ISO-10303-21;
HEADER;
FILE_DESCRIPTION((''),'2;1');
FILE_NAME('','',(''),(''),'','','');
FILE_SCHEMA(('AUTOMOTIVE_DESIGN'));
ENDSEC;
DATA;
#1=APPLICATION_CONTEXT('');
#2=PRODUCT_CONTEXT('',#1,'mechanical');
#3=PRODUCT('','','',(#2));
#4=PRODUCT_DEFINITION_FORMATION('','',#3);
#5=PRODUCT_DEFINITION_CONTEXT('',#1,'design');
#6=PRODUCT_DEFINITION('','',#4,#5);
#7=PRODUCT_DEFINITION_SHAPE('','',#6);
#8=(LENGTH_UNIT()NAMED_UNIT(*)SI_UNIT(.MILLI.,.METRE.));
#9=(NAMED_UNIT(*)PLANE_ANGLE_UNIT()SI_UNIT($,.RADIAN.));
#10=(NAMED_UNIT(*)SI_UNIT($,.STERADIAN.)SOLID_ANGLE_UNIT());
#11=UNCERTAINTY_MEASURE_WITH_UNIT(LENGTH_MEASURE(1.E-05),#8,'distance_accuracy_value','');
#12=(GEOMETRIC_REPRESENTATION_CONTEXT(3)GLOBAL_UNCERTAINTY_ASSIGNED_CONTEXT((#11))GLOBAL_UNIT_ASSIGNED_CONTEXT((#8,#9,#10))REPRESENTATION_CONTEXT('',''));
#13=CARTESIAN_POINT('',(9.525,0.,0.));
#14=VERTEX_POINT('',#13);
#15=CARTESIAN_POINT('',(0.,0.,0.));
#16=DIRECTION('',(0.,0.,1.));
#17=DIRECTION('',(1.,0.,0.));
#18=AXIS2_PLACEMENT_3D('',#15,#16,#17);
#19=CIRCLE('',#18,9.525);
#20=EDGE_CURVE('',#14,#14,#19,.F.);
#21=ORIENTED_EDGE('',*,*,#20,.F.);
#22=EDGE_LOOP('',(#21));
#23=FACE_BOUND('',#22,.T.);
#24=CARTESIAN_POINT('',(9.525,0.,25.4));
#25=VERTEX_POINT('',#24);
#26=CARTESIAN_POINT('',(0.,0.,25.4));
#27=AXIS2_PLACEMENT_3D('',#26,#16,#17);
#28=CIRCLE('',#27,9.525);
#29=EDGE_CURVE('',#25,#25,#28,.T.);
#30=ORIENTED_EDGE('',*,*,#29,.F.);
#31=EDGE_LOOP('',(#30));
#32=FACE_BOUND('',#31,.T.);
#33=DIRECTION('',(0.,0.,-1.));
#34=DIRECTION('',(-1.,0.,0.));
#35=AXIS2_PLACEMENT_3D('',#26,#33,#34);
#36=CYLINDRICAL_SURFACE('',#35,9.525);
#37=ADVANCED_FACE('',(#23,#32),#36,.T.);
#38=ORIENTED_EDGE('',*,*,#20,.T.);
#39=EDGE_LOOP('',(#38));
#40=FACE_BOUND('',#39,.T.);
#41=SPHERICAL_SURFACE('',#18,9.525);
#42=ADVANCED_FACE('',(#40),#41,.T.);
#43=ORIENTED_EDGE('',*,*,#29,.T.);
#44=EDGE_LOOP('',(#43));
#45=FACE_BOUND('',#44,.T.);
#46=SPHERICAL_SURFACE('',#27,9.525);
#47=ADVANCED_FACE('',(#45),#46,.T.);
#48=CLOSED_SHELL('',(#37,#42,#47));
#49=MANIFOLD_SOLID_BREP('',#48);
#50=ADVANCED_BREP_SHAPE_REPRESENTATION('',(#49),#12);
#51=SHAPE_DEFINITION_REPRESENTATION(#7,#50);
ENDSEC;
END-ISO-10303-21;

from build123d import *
from build123d.topology import SkipClean

# Parameters (mm, degrees)
SKETCH1_R           = 9.525
BOSS_EXTRUDE1_DEPTH = 25.4


with BuildPart() as part:
    # Sketch1 → Boss-Extrude1 (new body)
    with BuildSketch(Plane.XY):
        Circle(SKETCH1_R)
    extrude(amount=BOSS_EXTRUDE1_DEPTH)

    # Sketch2 → Revolve1 (revolve)
    with BuildSketch(Plane(origin=(0, 0, 0), x_dir=(0, 0, -1), z_dir=(1, 0, 0))):
        with BuildLine():
            Line((0, 9.525), (0, -9.525))
            ThreePointArc((0, -9.525), (9.525, 0), (0, 9.525))
        make_face()
    revolve(axis=Axis((0, 9.525, 0), (0, -1, 0)))

    # Sketch3 → Revolve2 (revolve)
    with SkipClean():  # the faces are left unmerged after this step: merging them gives an invalid solid
        with BuildSketch(Plane(origin=(0, 0, 0), x_dir=(0, 0, -1), z_dir=(1, 0, 0))):
            with BuildLine():
                Line((-25.4, 9.525), (-25.4, -9.525))
                ThreePointArc((-25.4, -9.525), (-34.925, 0), (-25.4, 9.525))
            make_face()
        revolve(axis=Axis((0, 9.525, 25.4), (0, -1, 0)))


solid = part.part
